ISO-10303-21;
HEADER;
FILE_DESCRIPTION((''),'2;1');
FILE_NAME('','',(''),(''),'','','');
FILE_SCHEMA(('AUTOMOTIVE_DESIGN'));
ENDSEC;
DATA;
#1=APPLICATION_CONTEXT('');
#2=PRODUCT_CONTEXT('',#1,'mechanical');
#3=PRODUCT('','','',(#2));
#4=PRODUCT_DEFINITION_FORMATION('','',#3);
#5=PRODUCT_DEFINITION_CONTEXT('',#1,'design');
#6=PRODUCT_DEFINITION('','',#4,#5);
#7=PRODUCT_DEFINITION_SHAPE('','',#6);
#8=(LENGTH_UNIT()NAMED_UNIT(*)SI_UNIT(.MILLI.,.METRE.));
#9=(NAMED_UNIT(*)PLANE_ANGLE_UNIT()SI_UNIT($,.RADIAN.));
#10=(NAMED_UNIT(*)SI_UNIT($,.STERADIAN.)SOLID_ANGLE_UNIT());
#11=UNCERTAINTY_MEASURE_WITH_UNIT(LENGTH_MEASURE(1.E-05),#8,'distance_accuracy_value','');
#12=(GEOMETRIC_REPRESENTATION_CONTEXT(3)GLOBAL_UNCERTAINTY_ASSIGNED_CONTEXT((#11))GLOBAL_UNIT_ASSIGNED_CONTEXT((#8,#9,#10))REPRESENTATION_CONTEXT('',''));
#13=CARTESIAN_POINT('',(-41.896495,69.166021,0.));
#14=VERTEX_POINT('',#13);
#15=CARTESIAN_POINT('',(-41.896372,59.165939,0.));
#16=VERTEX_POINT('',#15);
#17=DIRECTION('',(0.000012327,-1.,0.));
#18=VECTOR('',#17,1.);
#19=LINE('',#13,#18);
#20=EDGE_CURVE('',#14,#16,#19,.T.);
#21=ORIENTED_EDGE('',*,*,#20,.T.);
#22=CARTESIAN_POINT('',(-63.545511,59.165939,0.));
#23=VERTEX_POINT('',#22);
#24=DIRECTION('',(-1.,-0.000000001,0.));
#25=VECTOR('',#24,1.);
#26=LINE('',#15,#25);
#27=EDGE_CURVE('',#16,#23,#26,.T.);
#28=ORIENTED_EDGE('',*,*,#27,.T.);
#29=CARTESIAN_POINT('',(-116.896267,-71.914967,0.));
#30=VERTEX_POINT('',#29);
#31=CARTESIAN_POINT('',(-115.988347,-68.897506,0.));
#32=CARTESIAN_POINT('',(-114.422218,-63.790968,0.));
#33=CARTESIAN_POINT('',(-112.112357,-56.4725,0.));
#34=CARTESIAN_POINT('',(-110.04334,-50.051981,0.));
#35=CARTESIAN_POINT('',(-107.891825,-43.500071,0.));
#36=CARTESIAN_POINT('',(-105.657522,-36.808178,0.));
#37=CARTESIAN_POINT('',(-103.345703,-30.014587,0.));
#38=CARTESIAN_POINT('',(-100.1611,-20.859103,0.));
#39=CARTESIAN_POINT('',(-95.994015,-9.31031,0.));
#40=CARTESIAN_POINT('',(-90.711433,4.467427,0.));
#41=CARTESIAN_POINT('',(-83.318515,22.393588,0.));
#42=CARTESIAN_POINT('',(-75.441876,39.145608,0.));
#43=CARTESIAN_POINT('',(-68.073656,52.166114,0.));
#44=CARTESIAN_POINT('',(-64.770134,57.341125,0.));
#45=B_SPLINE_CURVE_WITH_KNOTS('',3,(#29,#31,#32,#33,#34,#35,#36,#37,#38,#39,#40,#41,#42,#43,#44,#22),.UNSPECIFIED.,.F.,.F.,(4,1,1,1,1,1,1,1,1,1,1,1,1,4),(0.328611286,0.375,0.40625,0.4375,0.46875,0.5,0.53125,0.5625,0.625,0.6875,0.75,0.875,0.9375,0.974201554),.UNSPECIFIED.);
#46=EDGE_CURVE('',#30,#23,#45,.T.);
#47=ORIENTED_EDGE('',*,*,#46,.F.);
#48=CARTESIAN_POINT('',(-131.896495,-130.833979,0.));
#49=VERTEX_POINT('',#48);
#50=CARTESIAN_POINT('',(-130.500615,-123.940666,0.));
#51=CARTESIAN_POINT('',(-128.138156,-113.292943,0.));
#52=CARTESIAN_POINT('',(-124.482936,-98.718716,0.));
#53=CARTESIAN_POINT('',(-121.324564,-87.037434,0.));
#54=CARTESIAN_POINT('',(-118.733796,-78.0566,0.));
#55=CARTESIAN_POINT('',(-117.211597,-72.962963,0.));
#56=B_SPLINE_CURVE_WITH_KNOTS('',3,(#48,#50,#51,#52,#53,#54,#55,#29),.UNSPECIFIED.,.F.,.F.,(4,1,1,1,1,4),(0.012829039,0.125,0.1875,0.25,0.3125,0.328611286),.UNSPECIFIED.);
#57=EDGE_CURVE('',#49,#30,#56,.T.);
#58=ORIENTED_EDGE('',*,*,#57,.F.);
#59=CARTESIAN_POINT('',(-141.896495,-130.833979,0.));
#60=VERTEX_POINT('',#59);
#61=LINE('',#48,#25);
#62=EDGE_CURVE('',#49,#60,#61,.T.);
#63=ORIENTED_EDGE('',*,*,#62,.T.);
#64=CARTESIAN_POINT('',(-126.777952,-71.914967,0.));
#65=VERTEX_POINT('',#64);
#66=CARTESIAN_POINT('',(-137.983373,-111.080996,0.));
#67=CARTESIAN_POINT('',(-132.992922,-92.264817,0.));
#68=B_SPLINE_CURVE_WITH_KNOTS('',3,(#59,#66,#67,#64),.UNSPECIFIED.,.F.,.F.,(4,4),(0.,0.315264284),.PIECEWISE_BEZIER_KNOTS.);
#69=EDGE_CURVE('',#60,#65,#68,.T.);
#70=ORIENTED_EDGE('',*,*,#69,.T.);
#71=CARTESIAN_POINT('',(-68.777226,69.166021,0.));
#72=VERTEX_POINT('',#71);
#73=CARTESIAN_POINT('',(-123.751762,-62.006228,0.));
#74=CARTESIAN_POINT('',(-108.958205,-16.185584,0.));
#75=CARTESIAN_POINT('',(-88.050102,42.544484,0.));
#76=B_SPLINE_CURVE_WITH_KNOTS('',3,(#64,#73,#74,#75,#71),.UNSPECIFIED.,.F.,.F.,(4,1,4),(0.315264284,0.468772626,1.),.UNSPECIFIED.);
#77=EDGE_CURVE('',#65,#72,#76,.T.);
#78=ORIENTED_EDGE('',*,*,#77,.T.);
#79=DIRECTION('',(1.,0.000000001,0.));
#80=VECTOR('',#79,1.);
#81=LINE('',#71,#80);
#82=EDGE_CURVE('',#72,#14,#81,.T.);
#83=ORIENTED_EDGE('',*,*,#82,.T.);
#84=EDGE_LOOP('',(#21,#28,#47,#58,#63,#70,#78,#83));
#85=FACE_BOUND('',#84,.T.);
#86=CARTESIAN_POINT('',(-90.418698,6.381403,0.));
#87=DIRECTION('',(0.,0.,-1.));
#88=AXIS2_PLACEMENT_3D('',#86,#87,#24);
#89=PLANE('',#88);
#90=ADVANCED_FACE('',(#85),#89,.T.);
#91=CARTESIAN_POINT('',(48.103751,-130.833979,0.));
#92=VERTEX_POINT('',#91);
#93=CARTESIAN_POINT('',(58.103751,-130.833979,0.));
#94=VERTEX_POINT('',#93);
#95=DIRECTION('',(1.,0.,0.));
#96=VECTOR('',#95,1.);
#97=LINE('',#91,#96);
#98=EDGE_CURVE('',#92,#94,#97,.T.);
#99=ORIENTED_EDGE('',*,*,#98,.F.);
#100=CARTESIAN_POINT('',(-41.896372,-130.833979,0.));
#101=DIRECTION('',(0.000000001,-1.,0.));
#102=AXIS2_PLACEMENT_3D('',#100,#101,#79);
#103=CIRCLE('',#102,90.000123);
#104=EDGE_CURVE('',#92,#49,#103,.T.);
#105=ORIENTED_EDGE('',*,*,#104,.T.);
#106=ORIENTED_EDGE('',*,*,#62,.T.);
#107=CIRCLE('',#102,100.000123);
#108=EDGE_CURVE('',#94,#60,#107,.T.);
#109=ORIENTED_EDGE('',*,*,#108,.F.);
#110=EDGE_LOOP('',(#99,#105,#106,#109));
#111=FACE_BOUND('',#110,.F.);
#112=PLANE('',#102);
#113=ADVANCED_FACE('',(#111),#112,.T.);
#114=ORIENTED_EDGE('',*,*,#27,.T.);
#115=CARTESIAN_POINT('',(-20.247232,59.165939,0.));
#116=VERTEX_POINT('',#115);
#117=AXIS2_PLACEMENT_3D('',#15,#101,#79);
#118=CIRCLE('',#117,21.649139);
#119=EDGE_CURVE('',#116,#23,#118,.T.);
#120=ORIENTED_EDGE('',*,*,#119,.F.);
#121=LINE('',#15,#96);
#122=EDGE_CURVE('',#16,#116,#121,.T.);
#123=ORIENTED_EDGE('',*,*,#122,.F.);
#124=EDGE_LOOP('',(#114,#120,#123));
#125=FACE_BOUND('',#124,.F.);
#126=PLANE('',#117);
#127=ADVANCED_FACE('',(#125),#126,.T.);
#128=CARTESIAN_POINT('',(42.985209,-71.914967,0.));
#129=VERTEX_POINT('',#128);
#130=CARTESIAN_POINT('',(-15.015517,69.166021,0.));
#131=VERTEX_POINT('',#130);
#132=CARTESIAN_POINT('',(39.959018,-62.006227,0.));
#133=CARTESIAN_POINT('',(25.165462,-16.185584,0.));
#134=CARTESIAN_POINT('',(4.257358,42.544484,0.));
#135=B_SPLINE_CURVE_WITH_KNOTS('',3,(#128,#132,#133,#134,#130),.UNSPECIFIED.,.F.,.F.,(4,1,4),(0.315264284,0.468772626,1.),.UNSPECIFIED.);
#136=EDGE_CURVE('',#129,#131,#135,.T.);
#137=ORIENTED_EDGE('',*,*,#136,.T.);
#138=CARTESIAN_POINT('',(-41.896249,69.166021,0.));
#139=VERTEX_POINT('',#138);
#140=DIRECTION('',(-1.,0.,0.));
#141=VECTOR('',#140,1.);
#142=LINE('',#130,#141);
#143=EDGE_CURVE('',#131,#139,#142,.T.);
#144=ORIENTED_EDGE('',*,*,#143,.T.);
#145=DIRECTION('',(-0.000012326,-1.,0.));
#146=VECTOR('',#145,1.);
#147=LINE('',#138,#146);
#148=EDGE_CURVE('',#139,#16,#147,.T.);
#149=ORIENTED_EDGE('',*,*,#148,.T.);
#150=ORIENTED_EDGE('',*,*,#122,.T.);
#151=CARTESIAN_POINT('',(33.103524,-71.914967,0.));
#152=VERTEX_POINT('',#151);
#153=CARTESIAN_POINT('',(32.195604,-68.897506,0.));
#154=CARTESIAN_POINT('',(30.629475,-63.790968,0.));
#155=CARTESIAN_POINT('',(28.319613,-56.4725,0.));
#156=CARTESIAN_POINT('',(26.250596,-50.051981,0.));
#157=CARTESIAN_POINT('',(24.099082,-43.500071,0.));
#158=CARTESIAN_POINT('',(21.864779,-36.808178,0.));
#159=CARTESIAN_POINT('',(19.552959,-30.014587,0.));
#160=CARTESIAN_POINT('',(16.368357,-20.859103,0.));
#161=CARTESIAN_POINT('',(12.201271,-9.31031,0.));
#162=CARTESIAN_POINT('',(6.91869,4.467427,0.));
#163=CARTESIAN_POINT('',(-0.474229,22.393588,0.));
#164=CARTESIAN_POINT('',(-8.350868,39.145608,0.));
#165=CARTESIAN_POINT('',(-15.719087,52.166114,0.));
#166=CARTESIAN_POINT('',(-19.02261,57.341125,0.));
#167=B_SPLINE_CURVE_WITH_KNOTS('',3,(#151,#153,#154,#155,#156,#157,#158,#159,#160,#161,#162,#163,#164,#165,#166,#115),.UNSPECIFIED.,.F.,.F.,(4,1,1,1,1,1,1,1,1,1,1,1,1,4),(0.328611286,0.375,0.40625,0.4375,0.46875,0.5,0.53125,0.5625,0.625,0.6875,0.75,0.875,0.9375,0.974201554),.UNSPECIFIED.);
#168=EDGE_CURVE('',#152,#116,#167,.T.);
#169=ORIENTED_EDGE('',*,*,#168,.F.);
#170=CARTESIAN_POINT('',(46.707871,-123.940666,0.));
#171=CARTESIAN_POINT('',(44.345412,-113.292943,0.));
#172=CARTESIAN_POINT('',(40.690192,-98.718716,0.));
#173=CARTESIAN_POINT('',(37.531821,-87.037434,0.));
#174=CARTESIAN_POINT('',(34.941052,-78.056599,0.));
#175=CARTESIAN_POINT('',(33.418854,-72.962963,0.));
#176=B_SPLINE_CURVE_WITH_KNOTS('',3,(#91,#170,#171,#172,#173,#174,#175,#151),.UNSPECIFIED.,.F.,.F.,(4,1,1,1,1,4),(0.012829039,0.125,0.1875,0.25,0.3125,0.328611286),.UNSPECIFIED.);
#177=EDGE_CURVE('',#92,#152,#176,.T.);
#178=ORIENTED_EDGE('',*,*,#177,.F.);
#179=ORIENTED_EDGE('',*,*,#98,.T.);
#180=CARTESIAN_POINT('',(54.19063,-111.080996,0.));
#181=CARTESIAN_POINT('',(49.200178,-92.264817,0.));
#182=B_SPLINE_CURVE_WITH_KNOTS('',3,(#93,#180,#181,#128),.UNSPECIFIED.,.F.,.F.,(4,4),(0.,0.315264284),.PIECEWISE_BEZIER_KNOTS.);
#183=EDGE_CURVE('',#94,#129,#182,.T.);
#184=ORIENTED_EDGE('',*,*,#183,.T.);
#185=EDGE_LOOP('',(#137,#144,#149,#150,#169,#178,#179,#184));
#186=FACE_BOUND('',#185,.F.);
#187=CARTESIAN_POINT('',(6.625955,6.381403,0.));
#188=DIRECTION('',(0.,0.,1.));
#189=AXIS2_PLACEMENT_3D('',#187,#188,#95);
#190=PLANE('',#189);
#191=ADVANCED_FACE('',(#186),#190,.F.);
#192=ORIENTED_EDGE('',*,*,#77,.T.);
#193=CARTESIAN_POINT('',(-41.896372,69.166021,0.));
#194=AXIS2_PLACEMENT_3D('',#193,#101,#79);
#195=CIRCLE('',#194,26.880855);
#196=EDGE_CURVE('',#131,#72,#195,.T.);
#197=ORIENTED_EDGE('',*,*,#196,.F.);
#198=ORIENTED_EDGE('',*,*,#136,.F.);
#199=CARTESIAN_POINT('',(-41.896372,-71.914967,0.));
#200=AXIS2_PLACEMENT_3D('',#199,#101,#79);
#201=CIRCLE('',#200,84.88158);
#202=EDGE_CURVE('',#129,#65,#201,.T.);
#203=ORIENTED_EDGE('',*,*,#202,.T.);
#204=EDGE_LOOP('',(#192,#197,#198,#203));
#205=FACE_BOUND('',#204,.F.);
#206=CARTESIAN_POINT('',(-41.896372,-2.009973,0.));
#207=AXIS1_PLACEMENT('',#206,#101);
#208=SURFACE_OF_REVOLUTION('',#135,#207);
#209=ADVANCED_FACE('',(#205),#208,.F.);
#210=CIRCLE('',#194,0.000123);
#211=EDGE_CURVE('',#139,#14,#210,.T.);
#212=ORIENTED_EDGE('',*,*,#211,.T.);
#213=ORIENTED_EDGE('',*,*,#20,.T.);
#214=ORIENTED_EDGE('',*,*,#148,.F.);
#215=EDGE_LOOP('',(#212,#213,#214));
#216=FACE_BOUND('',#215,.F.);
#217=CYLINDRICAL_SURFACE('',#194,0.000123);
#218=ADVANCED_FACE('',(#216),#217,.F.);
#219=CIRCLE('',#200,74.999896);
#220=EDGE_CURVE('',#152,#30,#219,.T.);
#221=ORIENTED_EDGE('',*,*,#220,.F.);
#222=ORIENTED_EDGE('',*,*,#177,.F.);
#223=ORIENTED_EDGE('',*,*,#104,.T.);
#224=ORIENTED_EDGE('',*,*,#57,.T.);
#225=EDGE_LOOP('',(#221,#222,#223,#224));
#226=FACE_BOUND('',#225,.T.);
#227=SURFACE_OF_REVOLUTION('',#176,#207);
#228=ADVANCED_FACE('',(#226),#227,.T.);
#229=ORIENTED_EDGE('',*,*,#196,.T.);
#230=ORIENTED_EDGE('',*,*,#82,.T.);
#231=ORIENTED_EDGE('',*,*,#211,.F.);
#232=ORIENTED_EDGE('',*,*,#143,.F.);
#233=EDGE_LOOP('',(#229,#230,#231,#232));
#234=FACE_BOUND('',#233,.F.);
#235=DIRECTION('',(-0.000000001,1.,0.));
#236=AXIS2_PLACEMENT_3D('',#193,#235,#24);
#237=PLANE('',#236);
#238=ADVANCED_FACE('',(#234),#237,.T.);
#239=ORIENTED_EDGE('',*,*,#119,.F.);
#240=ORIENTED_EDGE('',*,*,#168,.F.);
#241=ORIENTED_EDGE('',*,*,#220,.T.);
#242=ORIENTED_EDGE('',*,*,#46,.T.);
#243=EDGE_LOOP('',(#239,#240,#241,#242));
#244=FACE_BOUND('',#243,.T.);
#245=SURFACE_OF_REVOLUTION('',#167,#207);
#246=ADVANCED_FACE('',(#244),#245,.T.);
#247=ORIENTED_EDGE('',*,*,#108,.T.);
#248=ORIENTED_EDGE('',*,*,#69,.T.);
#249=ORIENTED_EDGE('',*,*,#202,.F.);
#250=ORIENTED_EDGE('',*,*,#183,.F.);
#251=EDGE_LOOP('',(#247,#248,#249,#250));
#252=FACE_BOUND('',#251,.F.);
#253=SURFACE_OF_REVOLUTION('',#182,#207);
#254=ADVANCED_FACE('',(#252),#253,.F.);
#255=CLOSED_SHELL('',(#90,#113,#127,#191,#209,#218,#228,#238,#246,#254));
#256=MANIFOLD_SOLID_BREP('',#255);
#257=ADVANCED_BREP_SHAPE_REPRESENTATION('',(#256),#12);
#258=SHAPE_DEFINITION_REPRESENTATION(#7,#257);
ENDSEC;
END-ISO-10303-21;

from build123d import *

# Parameters (mm, degrees)
F1_ANGLE = 180


# Not quite as in the source:
# - the dataset's text gives a spline's control points without its knots; the knots are read off the source's solid


with BuildPart() as f1:
    # F0 (on Top) → F1 (revolve)
    with BuildSketch(Plane.XY):
        with BuildLine():
            Line((-15.0155171111, 69.1660211089), (-41.8962485401, 69.1660211089))
            Line((-41.8962485401, 69.1660211089), (-41.8963717975, 59.1659390384))
            Line((-41.8963717975, 59.1659390384), (-20.2472324434, 59.1659390491))
            add(Edge.make_bspline(
                [(33.1035238522, -71.9149671498), (32.1956039275, -68.8975063653), (30.6294745703, -63.7909684), (28.3196130402, -56.4725000911), (26.2505964512, -50.0519807984), (24.0990817026, -43.5000705854), (21.8647786098, -36.8081776409), (19.5529594243, -30.0145868681), (16.3683569347, -20.8591029876), (12.2012714526, -9.3103100361), (6.9186898701, 4.4674267501), (-0.4742289291, 22.3935878339), (-8.3508677217, 39.1456078716), (-15.719087441, 52.1661135478), (-19.0226095104, 57.3411254378), (-20.2472324434, 59.1659390491)],
                knots=[0.3286112864, 0.3286112864, 0.3286112864, 0.3286112864, 0.375, 0.40625, 0.4375, 0.46875, 0.5, 0.53125, 0.5625, 0.625, 0.6875, 0.75, 0.875, 0.9375, 0.9742015542, 0.9742015542, 0.9742015542, 0.9742015542], degree=3))
            Line((33.1035238522, -71.9149671498), (42.9852085247, -71.9149671498))
            add(Edge.make_bspline(
                [(42.9852085247, -71.9149671498), (39.9590182528, -62.0062274912), (25.1654617563, -16.1855840824), (4.2573580541, 42.5444841716), (-15.0155171111, 69.1660211089)],
                knots=[0.3152642845, 0.3152642845, 0.3152642845, 0.3152642845, 0.4687726258, 1, 1, 1, 1], degree=3))
        make_face()
        with BuildLine():
            add(Edge.make_bspline(
                [(58.1037514599, -130.8339788911), (54.1906296951, -111.0809956414), (49.2001783618, -92.2648171488), (42.9852085247, -71.9149671498)],
                knots=[0, 0, 0, 0, 0.3152642845, 0.3152642845, 0.3152642845, 0.3152642845], degree=3))
            Line((42.9852085247, -71.9149671498), (33.1035238522, -71.9149671498))
            add(Edge.make_bspline(
                [(48.1037514599, -130.8339788911), (46.7078713802, -123.9406660172), (44.3454121428, -113.2929426353), (40.6901923565, -98.7187159107), (37.5318209869, -87.037434), (34.9410521612, -78.0565994752), (33.4188539578, -72.9629629054), (33.1035238522, -71.9149671498)],
                knots=[0.0128290388, 0.0128290388, 0.0128290388, 0.0128290388, 0.125, 0.1875, 0.25, 0.3125, 0.3286112864, 0.3286112864, 0.3286112864, 0.3286112864], degree=3))
            Line((48.1037514599, -130.8339788911), (58.1037514599, -130.8339788911))
        make_face()
    revolve(axis=Axis((-41.8963717672, -2.0099732555, 0), (5e-10, -1, 0)), revolution_arc=F1_ANGLE)


solid = f1.part
